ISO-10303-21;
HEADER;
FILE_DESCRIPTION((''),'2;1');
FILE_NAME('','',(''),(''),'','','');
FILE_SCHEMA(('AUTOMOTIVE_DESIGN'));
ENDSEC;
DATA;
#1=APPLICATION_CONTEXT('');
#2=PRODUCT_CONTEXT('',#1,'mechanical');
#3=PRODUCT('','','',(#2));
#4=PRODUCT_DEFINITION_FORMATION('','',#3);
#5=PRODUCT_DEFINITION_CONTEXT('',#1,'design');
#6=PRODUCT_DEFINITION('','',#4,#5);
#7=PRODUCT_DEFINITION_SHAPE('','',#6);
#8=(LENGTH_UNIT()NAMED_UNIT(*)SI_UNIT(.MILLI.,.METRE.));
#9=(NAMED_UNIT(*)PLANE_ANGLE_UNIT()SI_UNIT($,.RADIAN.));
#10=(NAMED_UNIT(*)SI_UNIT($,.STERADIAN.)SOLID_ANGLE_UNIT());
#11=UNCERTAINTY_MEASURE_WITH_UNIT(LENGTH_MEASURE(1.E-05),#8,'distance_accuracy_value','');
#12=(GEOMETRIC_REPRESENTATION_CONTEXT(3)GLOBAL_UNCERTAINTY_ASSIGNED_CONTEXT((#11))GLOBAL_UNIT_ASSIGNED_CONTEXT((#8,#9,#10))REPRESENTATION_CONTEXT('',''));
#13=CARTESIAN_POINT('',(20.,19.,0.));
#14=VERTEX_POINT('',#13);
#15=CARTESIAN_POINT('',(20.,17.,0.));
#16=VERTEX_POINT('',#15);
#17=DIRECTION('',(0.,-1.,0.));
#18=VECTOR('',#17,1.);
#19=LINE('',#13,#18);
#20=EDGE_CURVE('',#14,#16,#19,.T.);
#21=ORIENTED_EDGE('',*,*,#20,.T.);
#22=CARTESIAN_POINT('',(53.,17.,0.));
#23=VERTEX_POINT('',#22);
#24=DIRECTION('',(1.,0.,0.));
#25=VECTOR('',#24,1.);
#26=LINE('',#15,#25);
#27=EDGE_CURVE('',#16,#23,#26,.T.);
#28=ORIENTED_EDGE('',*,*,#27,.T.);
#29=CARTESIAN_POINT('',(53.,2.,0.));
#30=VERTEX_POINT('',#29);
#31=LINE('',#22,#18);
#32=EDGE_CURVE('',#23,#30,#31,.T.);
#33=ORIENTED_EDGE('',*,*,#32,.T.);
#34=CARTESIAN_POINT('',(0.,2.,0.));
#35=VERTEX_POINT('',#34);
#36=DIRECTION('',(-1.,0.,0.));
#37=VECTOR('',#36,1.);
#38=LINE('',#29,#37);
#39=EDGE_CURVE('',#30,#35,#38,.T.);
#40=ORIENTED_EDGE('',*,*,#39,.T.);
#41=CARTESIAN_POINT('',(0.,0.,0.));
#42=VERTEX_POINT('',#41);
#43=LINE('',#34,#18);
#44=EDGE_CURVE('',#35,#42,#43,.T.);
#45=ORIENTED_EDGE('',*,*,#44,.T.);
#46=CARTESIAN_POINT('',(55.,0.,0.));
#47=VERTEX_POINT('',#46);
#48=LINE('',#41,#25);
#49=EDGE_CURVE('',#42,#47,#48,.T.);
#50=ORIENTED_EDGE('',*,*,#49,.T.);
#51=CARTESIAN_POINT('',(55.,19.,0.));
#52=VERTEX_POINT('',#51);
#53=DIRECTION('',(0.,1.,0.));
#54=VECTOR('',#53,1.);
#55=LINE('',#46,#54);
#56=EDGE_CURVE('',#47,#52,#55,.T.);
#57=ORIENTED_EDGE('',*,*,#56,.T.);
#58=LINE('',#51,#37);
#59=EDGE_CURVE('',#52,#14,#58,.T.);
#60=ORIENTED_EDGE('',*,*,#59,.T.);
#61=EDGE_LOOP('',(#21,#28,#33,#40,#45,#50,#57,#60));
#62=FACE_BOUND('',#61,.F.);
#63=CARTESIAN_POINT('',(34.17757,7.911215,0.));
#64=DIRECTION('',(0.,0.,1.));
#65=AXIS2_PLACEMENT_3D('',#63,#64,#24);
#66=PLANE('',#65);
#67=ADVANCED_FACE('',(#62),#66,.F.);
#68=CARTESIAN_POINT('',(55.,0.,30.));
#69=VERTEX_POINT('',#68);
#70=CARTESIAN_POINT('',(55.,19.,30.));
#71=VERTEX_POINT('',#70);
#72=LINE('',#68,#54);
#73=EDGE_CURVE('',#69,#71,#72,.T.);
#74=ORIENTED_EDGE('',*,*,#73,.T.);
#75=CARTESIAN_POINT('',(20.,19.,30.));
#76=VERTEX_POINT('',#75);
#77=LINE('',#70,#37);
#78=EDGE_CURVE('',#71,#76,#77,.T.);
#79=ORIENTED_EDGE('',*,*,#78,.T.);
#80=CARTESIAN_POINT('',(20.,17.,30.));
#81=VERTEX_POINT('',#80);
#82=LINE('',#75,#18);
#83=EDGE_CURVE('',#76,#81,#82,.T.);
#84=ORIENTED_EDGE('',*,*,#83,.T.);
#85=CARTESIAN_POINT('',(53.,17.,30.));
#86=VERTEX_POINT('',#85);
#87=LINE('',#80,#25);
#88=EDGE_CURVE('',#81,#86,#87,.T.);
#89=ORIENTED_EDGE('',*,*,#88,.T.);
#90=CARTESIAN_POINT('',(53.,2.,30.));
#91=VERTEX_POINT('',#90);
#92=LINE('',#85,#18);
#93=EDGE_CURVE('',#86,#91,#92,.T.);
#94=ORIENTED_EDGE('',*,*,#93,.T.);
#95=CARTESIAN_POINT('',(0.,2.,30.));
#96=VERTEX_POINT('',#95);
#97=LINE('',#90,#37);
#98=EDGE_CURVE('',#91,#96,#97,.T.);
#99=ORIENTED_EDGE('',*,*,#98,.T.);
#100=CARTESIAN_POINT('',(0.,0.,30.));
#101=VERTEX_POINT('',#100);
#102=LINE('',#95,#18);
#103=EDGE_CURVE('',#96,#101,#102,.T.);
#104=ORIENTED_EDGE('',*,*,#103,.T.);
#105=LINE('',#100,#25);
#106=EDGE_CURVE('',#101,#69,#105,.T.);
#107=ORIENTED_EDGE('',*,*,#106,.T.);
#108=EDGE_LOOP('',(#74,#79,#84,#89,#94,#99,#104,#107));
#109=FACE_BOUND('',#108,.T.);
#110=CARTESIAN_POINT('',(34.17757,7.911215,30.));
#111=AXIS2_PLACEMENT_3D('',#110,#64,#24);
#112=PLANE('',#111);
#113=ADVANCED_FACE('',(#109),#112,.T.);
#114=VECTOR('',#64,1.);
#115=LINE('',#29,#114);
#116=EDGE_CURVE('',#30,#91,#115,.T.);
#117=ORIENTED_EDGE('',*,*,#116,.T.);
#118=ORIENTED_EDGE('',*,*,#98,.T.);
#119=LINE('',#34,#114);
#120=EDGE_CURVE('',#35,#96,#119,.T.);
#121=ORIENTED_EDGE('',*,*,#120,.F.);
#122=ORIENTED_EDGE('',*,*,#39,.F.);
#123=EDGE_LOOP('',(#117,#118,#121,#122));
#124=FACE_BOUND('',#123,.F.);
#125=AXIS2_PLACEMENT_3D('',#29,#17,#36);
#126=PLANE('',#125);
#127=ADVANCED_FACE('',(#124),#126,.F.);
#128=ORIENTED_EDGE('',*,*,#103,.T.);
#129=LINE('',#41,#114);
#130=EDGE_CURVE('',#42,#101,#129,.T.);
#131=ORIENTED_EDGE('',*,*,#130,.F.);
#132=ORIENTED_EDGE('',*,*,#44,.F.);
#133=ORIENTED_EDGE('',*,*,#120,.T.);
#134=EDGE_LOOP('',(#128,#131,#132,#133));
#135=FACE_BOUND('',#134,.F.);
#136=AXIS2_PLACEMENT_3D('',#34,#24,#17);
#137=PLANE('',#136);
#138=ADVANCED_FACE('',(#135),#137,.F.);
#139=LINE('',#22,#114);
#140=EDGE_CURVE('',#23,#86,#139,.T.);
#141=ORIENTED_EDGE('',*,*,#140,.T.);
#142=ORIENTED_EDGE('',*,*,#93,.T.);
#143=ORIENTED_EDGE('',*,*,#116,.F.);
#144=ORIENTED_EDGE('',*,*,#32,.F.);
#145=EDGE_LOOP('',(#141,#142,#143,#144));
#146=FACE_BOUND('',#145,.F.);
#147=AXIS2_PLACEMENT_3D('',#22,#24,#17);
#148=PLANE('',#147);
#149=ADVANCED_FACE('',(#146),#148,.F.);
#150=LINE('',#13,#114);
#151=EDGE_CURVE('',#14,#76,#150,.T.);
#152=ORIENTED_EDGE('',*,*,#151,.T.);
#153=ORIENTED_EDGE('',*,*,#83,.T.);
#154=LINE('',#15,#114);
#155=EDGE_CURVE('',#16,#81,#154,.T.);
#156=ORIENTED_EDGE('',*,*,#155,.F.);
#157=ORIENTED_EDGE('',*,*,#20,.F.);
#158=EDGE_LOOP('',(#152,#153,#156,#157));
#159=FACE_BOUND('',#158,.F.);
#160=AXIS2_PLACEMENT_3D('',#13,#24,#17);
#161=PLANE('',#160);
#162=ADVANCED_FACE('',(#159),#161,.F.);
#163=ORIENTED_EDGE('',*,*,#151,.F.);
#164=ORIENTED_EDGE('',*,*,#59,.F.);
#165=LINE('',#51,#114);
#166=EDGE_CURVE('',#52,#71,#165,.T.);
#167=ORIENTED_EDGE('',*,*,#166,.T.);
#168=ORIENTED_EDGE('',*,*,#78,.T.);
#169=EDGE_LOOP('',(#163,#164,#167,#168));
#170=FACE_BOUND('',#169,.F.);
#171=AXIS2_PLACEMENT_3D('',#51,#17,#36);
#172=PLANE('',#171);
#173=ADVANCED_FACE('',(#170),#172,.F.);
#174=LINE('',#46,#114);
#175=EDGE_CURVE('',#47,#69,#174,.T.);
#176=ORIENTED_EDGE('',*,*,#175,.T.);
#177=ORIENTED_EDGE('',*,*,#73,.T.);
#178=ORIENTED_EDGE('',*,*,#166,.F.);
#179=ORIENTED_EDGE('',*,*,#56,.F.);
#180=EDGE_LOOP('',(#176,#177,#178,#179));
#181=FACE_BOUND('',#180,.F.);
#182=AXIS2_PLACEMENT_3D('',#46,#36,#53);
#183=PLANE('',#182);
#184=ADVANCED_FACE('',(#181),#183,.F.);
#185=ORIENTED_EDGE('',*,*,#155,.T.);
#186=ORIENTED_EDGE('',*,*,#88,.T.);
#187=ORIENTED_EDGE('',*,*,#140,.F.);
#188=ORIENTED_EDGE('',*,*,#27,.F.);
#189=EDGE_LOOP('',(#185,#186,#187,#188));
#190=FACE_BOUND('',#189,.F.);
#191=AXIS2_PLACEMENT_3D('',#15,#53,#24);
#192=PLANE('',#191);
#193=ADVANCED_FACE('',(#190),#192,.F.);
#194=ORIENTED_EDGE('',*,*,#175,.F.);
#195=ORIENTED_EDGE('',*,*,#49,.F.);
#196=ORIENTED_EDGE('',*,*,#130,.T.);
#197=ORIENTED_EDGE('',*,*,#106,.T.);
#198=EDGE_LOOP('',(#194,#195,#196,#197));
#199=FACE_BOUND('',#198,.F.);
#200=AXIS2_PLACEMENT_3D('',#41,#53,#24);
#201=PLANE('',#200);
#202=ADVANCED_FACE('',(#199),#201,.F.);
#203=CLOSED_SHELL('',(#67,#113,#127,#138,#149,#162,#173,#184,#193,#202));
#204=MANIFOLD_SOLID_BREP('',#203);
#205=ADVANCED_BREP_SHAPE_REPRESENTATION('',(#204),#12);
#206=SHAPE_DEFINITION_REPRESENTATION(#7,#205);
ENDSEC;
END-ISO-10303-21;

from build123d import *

# Parameters (mm, degrees)
F1_DEPTH = 30


# Not quite as in the source:
# - a feature of the source that left no trace in its solid (it failed there, or was rolled back) is left out


with BuildPart() as f1:
    # F0 (on Top) → F1 (new body)
    with BuildSketch(Plane.XY):
        Polygon((0, 2), (0, 0), (55, 0), (55, 19), (20, 19), (20, 17), (53, 17), (53, 2), align=None)
    extrude(amount=F1_DEPTH)


solid = f1.part
